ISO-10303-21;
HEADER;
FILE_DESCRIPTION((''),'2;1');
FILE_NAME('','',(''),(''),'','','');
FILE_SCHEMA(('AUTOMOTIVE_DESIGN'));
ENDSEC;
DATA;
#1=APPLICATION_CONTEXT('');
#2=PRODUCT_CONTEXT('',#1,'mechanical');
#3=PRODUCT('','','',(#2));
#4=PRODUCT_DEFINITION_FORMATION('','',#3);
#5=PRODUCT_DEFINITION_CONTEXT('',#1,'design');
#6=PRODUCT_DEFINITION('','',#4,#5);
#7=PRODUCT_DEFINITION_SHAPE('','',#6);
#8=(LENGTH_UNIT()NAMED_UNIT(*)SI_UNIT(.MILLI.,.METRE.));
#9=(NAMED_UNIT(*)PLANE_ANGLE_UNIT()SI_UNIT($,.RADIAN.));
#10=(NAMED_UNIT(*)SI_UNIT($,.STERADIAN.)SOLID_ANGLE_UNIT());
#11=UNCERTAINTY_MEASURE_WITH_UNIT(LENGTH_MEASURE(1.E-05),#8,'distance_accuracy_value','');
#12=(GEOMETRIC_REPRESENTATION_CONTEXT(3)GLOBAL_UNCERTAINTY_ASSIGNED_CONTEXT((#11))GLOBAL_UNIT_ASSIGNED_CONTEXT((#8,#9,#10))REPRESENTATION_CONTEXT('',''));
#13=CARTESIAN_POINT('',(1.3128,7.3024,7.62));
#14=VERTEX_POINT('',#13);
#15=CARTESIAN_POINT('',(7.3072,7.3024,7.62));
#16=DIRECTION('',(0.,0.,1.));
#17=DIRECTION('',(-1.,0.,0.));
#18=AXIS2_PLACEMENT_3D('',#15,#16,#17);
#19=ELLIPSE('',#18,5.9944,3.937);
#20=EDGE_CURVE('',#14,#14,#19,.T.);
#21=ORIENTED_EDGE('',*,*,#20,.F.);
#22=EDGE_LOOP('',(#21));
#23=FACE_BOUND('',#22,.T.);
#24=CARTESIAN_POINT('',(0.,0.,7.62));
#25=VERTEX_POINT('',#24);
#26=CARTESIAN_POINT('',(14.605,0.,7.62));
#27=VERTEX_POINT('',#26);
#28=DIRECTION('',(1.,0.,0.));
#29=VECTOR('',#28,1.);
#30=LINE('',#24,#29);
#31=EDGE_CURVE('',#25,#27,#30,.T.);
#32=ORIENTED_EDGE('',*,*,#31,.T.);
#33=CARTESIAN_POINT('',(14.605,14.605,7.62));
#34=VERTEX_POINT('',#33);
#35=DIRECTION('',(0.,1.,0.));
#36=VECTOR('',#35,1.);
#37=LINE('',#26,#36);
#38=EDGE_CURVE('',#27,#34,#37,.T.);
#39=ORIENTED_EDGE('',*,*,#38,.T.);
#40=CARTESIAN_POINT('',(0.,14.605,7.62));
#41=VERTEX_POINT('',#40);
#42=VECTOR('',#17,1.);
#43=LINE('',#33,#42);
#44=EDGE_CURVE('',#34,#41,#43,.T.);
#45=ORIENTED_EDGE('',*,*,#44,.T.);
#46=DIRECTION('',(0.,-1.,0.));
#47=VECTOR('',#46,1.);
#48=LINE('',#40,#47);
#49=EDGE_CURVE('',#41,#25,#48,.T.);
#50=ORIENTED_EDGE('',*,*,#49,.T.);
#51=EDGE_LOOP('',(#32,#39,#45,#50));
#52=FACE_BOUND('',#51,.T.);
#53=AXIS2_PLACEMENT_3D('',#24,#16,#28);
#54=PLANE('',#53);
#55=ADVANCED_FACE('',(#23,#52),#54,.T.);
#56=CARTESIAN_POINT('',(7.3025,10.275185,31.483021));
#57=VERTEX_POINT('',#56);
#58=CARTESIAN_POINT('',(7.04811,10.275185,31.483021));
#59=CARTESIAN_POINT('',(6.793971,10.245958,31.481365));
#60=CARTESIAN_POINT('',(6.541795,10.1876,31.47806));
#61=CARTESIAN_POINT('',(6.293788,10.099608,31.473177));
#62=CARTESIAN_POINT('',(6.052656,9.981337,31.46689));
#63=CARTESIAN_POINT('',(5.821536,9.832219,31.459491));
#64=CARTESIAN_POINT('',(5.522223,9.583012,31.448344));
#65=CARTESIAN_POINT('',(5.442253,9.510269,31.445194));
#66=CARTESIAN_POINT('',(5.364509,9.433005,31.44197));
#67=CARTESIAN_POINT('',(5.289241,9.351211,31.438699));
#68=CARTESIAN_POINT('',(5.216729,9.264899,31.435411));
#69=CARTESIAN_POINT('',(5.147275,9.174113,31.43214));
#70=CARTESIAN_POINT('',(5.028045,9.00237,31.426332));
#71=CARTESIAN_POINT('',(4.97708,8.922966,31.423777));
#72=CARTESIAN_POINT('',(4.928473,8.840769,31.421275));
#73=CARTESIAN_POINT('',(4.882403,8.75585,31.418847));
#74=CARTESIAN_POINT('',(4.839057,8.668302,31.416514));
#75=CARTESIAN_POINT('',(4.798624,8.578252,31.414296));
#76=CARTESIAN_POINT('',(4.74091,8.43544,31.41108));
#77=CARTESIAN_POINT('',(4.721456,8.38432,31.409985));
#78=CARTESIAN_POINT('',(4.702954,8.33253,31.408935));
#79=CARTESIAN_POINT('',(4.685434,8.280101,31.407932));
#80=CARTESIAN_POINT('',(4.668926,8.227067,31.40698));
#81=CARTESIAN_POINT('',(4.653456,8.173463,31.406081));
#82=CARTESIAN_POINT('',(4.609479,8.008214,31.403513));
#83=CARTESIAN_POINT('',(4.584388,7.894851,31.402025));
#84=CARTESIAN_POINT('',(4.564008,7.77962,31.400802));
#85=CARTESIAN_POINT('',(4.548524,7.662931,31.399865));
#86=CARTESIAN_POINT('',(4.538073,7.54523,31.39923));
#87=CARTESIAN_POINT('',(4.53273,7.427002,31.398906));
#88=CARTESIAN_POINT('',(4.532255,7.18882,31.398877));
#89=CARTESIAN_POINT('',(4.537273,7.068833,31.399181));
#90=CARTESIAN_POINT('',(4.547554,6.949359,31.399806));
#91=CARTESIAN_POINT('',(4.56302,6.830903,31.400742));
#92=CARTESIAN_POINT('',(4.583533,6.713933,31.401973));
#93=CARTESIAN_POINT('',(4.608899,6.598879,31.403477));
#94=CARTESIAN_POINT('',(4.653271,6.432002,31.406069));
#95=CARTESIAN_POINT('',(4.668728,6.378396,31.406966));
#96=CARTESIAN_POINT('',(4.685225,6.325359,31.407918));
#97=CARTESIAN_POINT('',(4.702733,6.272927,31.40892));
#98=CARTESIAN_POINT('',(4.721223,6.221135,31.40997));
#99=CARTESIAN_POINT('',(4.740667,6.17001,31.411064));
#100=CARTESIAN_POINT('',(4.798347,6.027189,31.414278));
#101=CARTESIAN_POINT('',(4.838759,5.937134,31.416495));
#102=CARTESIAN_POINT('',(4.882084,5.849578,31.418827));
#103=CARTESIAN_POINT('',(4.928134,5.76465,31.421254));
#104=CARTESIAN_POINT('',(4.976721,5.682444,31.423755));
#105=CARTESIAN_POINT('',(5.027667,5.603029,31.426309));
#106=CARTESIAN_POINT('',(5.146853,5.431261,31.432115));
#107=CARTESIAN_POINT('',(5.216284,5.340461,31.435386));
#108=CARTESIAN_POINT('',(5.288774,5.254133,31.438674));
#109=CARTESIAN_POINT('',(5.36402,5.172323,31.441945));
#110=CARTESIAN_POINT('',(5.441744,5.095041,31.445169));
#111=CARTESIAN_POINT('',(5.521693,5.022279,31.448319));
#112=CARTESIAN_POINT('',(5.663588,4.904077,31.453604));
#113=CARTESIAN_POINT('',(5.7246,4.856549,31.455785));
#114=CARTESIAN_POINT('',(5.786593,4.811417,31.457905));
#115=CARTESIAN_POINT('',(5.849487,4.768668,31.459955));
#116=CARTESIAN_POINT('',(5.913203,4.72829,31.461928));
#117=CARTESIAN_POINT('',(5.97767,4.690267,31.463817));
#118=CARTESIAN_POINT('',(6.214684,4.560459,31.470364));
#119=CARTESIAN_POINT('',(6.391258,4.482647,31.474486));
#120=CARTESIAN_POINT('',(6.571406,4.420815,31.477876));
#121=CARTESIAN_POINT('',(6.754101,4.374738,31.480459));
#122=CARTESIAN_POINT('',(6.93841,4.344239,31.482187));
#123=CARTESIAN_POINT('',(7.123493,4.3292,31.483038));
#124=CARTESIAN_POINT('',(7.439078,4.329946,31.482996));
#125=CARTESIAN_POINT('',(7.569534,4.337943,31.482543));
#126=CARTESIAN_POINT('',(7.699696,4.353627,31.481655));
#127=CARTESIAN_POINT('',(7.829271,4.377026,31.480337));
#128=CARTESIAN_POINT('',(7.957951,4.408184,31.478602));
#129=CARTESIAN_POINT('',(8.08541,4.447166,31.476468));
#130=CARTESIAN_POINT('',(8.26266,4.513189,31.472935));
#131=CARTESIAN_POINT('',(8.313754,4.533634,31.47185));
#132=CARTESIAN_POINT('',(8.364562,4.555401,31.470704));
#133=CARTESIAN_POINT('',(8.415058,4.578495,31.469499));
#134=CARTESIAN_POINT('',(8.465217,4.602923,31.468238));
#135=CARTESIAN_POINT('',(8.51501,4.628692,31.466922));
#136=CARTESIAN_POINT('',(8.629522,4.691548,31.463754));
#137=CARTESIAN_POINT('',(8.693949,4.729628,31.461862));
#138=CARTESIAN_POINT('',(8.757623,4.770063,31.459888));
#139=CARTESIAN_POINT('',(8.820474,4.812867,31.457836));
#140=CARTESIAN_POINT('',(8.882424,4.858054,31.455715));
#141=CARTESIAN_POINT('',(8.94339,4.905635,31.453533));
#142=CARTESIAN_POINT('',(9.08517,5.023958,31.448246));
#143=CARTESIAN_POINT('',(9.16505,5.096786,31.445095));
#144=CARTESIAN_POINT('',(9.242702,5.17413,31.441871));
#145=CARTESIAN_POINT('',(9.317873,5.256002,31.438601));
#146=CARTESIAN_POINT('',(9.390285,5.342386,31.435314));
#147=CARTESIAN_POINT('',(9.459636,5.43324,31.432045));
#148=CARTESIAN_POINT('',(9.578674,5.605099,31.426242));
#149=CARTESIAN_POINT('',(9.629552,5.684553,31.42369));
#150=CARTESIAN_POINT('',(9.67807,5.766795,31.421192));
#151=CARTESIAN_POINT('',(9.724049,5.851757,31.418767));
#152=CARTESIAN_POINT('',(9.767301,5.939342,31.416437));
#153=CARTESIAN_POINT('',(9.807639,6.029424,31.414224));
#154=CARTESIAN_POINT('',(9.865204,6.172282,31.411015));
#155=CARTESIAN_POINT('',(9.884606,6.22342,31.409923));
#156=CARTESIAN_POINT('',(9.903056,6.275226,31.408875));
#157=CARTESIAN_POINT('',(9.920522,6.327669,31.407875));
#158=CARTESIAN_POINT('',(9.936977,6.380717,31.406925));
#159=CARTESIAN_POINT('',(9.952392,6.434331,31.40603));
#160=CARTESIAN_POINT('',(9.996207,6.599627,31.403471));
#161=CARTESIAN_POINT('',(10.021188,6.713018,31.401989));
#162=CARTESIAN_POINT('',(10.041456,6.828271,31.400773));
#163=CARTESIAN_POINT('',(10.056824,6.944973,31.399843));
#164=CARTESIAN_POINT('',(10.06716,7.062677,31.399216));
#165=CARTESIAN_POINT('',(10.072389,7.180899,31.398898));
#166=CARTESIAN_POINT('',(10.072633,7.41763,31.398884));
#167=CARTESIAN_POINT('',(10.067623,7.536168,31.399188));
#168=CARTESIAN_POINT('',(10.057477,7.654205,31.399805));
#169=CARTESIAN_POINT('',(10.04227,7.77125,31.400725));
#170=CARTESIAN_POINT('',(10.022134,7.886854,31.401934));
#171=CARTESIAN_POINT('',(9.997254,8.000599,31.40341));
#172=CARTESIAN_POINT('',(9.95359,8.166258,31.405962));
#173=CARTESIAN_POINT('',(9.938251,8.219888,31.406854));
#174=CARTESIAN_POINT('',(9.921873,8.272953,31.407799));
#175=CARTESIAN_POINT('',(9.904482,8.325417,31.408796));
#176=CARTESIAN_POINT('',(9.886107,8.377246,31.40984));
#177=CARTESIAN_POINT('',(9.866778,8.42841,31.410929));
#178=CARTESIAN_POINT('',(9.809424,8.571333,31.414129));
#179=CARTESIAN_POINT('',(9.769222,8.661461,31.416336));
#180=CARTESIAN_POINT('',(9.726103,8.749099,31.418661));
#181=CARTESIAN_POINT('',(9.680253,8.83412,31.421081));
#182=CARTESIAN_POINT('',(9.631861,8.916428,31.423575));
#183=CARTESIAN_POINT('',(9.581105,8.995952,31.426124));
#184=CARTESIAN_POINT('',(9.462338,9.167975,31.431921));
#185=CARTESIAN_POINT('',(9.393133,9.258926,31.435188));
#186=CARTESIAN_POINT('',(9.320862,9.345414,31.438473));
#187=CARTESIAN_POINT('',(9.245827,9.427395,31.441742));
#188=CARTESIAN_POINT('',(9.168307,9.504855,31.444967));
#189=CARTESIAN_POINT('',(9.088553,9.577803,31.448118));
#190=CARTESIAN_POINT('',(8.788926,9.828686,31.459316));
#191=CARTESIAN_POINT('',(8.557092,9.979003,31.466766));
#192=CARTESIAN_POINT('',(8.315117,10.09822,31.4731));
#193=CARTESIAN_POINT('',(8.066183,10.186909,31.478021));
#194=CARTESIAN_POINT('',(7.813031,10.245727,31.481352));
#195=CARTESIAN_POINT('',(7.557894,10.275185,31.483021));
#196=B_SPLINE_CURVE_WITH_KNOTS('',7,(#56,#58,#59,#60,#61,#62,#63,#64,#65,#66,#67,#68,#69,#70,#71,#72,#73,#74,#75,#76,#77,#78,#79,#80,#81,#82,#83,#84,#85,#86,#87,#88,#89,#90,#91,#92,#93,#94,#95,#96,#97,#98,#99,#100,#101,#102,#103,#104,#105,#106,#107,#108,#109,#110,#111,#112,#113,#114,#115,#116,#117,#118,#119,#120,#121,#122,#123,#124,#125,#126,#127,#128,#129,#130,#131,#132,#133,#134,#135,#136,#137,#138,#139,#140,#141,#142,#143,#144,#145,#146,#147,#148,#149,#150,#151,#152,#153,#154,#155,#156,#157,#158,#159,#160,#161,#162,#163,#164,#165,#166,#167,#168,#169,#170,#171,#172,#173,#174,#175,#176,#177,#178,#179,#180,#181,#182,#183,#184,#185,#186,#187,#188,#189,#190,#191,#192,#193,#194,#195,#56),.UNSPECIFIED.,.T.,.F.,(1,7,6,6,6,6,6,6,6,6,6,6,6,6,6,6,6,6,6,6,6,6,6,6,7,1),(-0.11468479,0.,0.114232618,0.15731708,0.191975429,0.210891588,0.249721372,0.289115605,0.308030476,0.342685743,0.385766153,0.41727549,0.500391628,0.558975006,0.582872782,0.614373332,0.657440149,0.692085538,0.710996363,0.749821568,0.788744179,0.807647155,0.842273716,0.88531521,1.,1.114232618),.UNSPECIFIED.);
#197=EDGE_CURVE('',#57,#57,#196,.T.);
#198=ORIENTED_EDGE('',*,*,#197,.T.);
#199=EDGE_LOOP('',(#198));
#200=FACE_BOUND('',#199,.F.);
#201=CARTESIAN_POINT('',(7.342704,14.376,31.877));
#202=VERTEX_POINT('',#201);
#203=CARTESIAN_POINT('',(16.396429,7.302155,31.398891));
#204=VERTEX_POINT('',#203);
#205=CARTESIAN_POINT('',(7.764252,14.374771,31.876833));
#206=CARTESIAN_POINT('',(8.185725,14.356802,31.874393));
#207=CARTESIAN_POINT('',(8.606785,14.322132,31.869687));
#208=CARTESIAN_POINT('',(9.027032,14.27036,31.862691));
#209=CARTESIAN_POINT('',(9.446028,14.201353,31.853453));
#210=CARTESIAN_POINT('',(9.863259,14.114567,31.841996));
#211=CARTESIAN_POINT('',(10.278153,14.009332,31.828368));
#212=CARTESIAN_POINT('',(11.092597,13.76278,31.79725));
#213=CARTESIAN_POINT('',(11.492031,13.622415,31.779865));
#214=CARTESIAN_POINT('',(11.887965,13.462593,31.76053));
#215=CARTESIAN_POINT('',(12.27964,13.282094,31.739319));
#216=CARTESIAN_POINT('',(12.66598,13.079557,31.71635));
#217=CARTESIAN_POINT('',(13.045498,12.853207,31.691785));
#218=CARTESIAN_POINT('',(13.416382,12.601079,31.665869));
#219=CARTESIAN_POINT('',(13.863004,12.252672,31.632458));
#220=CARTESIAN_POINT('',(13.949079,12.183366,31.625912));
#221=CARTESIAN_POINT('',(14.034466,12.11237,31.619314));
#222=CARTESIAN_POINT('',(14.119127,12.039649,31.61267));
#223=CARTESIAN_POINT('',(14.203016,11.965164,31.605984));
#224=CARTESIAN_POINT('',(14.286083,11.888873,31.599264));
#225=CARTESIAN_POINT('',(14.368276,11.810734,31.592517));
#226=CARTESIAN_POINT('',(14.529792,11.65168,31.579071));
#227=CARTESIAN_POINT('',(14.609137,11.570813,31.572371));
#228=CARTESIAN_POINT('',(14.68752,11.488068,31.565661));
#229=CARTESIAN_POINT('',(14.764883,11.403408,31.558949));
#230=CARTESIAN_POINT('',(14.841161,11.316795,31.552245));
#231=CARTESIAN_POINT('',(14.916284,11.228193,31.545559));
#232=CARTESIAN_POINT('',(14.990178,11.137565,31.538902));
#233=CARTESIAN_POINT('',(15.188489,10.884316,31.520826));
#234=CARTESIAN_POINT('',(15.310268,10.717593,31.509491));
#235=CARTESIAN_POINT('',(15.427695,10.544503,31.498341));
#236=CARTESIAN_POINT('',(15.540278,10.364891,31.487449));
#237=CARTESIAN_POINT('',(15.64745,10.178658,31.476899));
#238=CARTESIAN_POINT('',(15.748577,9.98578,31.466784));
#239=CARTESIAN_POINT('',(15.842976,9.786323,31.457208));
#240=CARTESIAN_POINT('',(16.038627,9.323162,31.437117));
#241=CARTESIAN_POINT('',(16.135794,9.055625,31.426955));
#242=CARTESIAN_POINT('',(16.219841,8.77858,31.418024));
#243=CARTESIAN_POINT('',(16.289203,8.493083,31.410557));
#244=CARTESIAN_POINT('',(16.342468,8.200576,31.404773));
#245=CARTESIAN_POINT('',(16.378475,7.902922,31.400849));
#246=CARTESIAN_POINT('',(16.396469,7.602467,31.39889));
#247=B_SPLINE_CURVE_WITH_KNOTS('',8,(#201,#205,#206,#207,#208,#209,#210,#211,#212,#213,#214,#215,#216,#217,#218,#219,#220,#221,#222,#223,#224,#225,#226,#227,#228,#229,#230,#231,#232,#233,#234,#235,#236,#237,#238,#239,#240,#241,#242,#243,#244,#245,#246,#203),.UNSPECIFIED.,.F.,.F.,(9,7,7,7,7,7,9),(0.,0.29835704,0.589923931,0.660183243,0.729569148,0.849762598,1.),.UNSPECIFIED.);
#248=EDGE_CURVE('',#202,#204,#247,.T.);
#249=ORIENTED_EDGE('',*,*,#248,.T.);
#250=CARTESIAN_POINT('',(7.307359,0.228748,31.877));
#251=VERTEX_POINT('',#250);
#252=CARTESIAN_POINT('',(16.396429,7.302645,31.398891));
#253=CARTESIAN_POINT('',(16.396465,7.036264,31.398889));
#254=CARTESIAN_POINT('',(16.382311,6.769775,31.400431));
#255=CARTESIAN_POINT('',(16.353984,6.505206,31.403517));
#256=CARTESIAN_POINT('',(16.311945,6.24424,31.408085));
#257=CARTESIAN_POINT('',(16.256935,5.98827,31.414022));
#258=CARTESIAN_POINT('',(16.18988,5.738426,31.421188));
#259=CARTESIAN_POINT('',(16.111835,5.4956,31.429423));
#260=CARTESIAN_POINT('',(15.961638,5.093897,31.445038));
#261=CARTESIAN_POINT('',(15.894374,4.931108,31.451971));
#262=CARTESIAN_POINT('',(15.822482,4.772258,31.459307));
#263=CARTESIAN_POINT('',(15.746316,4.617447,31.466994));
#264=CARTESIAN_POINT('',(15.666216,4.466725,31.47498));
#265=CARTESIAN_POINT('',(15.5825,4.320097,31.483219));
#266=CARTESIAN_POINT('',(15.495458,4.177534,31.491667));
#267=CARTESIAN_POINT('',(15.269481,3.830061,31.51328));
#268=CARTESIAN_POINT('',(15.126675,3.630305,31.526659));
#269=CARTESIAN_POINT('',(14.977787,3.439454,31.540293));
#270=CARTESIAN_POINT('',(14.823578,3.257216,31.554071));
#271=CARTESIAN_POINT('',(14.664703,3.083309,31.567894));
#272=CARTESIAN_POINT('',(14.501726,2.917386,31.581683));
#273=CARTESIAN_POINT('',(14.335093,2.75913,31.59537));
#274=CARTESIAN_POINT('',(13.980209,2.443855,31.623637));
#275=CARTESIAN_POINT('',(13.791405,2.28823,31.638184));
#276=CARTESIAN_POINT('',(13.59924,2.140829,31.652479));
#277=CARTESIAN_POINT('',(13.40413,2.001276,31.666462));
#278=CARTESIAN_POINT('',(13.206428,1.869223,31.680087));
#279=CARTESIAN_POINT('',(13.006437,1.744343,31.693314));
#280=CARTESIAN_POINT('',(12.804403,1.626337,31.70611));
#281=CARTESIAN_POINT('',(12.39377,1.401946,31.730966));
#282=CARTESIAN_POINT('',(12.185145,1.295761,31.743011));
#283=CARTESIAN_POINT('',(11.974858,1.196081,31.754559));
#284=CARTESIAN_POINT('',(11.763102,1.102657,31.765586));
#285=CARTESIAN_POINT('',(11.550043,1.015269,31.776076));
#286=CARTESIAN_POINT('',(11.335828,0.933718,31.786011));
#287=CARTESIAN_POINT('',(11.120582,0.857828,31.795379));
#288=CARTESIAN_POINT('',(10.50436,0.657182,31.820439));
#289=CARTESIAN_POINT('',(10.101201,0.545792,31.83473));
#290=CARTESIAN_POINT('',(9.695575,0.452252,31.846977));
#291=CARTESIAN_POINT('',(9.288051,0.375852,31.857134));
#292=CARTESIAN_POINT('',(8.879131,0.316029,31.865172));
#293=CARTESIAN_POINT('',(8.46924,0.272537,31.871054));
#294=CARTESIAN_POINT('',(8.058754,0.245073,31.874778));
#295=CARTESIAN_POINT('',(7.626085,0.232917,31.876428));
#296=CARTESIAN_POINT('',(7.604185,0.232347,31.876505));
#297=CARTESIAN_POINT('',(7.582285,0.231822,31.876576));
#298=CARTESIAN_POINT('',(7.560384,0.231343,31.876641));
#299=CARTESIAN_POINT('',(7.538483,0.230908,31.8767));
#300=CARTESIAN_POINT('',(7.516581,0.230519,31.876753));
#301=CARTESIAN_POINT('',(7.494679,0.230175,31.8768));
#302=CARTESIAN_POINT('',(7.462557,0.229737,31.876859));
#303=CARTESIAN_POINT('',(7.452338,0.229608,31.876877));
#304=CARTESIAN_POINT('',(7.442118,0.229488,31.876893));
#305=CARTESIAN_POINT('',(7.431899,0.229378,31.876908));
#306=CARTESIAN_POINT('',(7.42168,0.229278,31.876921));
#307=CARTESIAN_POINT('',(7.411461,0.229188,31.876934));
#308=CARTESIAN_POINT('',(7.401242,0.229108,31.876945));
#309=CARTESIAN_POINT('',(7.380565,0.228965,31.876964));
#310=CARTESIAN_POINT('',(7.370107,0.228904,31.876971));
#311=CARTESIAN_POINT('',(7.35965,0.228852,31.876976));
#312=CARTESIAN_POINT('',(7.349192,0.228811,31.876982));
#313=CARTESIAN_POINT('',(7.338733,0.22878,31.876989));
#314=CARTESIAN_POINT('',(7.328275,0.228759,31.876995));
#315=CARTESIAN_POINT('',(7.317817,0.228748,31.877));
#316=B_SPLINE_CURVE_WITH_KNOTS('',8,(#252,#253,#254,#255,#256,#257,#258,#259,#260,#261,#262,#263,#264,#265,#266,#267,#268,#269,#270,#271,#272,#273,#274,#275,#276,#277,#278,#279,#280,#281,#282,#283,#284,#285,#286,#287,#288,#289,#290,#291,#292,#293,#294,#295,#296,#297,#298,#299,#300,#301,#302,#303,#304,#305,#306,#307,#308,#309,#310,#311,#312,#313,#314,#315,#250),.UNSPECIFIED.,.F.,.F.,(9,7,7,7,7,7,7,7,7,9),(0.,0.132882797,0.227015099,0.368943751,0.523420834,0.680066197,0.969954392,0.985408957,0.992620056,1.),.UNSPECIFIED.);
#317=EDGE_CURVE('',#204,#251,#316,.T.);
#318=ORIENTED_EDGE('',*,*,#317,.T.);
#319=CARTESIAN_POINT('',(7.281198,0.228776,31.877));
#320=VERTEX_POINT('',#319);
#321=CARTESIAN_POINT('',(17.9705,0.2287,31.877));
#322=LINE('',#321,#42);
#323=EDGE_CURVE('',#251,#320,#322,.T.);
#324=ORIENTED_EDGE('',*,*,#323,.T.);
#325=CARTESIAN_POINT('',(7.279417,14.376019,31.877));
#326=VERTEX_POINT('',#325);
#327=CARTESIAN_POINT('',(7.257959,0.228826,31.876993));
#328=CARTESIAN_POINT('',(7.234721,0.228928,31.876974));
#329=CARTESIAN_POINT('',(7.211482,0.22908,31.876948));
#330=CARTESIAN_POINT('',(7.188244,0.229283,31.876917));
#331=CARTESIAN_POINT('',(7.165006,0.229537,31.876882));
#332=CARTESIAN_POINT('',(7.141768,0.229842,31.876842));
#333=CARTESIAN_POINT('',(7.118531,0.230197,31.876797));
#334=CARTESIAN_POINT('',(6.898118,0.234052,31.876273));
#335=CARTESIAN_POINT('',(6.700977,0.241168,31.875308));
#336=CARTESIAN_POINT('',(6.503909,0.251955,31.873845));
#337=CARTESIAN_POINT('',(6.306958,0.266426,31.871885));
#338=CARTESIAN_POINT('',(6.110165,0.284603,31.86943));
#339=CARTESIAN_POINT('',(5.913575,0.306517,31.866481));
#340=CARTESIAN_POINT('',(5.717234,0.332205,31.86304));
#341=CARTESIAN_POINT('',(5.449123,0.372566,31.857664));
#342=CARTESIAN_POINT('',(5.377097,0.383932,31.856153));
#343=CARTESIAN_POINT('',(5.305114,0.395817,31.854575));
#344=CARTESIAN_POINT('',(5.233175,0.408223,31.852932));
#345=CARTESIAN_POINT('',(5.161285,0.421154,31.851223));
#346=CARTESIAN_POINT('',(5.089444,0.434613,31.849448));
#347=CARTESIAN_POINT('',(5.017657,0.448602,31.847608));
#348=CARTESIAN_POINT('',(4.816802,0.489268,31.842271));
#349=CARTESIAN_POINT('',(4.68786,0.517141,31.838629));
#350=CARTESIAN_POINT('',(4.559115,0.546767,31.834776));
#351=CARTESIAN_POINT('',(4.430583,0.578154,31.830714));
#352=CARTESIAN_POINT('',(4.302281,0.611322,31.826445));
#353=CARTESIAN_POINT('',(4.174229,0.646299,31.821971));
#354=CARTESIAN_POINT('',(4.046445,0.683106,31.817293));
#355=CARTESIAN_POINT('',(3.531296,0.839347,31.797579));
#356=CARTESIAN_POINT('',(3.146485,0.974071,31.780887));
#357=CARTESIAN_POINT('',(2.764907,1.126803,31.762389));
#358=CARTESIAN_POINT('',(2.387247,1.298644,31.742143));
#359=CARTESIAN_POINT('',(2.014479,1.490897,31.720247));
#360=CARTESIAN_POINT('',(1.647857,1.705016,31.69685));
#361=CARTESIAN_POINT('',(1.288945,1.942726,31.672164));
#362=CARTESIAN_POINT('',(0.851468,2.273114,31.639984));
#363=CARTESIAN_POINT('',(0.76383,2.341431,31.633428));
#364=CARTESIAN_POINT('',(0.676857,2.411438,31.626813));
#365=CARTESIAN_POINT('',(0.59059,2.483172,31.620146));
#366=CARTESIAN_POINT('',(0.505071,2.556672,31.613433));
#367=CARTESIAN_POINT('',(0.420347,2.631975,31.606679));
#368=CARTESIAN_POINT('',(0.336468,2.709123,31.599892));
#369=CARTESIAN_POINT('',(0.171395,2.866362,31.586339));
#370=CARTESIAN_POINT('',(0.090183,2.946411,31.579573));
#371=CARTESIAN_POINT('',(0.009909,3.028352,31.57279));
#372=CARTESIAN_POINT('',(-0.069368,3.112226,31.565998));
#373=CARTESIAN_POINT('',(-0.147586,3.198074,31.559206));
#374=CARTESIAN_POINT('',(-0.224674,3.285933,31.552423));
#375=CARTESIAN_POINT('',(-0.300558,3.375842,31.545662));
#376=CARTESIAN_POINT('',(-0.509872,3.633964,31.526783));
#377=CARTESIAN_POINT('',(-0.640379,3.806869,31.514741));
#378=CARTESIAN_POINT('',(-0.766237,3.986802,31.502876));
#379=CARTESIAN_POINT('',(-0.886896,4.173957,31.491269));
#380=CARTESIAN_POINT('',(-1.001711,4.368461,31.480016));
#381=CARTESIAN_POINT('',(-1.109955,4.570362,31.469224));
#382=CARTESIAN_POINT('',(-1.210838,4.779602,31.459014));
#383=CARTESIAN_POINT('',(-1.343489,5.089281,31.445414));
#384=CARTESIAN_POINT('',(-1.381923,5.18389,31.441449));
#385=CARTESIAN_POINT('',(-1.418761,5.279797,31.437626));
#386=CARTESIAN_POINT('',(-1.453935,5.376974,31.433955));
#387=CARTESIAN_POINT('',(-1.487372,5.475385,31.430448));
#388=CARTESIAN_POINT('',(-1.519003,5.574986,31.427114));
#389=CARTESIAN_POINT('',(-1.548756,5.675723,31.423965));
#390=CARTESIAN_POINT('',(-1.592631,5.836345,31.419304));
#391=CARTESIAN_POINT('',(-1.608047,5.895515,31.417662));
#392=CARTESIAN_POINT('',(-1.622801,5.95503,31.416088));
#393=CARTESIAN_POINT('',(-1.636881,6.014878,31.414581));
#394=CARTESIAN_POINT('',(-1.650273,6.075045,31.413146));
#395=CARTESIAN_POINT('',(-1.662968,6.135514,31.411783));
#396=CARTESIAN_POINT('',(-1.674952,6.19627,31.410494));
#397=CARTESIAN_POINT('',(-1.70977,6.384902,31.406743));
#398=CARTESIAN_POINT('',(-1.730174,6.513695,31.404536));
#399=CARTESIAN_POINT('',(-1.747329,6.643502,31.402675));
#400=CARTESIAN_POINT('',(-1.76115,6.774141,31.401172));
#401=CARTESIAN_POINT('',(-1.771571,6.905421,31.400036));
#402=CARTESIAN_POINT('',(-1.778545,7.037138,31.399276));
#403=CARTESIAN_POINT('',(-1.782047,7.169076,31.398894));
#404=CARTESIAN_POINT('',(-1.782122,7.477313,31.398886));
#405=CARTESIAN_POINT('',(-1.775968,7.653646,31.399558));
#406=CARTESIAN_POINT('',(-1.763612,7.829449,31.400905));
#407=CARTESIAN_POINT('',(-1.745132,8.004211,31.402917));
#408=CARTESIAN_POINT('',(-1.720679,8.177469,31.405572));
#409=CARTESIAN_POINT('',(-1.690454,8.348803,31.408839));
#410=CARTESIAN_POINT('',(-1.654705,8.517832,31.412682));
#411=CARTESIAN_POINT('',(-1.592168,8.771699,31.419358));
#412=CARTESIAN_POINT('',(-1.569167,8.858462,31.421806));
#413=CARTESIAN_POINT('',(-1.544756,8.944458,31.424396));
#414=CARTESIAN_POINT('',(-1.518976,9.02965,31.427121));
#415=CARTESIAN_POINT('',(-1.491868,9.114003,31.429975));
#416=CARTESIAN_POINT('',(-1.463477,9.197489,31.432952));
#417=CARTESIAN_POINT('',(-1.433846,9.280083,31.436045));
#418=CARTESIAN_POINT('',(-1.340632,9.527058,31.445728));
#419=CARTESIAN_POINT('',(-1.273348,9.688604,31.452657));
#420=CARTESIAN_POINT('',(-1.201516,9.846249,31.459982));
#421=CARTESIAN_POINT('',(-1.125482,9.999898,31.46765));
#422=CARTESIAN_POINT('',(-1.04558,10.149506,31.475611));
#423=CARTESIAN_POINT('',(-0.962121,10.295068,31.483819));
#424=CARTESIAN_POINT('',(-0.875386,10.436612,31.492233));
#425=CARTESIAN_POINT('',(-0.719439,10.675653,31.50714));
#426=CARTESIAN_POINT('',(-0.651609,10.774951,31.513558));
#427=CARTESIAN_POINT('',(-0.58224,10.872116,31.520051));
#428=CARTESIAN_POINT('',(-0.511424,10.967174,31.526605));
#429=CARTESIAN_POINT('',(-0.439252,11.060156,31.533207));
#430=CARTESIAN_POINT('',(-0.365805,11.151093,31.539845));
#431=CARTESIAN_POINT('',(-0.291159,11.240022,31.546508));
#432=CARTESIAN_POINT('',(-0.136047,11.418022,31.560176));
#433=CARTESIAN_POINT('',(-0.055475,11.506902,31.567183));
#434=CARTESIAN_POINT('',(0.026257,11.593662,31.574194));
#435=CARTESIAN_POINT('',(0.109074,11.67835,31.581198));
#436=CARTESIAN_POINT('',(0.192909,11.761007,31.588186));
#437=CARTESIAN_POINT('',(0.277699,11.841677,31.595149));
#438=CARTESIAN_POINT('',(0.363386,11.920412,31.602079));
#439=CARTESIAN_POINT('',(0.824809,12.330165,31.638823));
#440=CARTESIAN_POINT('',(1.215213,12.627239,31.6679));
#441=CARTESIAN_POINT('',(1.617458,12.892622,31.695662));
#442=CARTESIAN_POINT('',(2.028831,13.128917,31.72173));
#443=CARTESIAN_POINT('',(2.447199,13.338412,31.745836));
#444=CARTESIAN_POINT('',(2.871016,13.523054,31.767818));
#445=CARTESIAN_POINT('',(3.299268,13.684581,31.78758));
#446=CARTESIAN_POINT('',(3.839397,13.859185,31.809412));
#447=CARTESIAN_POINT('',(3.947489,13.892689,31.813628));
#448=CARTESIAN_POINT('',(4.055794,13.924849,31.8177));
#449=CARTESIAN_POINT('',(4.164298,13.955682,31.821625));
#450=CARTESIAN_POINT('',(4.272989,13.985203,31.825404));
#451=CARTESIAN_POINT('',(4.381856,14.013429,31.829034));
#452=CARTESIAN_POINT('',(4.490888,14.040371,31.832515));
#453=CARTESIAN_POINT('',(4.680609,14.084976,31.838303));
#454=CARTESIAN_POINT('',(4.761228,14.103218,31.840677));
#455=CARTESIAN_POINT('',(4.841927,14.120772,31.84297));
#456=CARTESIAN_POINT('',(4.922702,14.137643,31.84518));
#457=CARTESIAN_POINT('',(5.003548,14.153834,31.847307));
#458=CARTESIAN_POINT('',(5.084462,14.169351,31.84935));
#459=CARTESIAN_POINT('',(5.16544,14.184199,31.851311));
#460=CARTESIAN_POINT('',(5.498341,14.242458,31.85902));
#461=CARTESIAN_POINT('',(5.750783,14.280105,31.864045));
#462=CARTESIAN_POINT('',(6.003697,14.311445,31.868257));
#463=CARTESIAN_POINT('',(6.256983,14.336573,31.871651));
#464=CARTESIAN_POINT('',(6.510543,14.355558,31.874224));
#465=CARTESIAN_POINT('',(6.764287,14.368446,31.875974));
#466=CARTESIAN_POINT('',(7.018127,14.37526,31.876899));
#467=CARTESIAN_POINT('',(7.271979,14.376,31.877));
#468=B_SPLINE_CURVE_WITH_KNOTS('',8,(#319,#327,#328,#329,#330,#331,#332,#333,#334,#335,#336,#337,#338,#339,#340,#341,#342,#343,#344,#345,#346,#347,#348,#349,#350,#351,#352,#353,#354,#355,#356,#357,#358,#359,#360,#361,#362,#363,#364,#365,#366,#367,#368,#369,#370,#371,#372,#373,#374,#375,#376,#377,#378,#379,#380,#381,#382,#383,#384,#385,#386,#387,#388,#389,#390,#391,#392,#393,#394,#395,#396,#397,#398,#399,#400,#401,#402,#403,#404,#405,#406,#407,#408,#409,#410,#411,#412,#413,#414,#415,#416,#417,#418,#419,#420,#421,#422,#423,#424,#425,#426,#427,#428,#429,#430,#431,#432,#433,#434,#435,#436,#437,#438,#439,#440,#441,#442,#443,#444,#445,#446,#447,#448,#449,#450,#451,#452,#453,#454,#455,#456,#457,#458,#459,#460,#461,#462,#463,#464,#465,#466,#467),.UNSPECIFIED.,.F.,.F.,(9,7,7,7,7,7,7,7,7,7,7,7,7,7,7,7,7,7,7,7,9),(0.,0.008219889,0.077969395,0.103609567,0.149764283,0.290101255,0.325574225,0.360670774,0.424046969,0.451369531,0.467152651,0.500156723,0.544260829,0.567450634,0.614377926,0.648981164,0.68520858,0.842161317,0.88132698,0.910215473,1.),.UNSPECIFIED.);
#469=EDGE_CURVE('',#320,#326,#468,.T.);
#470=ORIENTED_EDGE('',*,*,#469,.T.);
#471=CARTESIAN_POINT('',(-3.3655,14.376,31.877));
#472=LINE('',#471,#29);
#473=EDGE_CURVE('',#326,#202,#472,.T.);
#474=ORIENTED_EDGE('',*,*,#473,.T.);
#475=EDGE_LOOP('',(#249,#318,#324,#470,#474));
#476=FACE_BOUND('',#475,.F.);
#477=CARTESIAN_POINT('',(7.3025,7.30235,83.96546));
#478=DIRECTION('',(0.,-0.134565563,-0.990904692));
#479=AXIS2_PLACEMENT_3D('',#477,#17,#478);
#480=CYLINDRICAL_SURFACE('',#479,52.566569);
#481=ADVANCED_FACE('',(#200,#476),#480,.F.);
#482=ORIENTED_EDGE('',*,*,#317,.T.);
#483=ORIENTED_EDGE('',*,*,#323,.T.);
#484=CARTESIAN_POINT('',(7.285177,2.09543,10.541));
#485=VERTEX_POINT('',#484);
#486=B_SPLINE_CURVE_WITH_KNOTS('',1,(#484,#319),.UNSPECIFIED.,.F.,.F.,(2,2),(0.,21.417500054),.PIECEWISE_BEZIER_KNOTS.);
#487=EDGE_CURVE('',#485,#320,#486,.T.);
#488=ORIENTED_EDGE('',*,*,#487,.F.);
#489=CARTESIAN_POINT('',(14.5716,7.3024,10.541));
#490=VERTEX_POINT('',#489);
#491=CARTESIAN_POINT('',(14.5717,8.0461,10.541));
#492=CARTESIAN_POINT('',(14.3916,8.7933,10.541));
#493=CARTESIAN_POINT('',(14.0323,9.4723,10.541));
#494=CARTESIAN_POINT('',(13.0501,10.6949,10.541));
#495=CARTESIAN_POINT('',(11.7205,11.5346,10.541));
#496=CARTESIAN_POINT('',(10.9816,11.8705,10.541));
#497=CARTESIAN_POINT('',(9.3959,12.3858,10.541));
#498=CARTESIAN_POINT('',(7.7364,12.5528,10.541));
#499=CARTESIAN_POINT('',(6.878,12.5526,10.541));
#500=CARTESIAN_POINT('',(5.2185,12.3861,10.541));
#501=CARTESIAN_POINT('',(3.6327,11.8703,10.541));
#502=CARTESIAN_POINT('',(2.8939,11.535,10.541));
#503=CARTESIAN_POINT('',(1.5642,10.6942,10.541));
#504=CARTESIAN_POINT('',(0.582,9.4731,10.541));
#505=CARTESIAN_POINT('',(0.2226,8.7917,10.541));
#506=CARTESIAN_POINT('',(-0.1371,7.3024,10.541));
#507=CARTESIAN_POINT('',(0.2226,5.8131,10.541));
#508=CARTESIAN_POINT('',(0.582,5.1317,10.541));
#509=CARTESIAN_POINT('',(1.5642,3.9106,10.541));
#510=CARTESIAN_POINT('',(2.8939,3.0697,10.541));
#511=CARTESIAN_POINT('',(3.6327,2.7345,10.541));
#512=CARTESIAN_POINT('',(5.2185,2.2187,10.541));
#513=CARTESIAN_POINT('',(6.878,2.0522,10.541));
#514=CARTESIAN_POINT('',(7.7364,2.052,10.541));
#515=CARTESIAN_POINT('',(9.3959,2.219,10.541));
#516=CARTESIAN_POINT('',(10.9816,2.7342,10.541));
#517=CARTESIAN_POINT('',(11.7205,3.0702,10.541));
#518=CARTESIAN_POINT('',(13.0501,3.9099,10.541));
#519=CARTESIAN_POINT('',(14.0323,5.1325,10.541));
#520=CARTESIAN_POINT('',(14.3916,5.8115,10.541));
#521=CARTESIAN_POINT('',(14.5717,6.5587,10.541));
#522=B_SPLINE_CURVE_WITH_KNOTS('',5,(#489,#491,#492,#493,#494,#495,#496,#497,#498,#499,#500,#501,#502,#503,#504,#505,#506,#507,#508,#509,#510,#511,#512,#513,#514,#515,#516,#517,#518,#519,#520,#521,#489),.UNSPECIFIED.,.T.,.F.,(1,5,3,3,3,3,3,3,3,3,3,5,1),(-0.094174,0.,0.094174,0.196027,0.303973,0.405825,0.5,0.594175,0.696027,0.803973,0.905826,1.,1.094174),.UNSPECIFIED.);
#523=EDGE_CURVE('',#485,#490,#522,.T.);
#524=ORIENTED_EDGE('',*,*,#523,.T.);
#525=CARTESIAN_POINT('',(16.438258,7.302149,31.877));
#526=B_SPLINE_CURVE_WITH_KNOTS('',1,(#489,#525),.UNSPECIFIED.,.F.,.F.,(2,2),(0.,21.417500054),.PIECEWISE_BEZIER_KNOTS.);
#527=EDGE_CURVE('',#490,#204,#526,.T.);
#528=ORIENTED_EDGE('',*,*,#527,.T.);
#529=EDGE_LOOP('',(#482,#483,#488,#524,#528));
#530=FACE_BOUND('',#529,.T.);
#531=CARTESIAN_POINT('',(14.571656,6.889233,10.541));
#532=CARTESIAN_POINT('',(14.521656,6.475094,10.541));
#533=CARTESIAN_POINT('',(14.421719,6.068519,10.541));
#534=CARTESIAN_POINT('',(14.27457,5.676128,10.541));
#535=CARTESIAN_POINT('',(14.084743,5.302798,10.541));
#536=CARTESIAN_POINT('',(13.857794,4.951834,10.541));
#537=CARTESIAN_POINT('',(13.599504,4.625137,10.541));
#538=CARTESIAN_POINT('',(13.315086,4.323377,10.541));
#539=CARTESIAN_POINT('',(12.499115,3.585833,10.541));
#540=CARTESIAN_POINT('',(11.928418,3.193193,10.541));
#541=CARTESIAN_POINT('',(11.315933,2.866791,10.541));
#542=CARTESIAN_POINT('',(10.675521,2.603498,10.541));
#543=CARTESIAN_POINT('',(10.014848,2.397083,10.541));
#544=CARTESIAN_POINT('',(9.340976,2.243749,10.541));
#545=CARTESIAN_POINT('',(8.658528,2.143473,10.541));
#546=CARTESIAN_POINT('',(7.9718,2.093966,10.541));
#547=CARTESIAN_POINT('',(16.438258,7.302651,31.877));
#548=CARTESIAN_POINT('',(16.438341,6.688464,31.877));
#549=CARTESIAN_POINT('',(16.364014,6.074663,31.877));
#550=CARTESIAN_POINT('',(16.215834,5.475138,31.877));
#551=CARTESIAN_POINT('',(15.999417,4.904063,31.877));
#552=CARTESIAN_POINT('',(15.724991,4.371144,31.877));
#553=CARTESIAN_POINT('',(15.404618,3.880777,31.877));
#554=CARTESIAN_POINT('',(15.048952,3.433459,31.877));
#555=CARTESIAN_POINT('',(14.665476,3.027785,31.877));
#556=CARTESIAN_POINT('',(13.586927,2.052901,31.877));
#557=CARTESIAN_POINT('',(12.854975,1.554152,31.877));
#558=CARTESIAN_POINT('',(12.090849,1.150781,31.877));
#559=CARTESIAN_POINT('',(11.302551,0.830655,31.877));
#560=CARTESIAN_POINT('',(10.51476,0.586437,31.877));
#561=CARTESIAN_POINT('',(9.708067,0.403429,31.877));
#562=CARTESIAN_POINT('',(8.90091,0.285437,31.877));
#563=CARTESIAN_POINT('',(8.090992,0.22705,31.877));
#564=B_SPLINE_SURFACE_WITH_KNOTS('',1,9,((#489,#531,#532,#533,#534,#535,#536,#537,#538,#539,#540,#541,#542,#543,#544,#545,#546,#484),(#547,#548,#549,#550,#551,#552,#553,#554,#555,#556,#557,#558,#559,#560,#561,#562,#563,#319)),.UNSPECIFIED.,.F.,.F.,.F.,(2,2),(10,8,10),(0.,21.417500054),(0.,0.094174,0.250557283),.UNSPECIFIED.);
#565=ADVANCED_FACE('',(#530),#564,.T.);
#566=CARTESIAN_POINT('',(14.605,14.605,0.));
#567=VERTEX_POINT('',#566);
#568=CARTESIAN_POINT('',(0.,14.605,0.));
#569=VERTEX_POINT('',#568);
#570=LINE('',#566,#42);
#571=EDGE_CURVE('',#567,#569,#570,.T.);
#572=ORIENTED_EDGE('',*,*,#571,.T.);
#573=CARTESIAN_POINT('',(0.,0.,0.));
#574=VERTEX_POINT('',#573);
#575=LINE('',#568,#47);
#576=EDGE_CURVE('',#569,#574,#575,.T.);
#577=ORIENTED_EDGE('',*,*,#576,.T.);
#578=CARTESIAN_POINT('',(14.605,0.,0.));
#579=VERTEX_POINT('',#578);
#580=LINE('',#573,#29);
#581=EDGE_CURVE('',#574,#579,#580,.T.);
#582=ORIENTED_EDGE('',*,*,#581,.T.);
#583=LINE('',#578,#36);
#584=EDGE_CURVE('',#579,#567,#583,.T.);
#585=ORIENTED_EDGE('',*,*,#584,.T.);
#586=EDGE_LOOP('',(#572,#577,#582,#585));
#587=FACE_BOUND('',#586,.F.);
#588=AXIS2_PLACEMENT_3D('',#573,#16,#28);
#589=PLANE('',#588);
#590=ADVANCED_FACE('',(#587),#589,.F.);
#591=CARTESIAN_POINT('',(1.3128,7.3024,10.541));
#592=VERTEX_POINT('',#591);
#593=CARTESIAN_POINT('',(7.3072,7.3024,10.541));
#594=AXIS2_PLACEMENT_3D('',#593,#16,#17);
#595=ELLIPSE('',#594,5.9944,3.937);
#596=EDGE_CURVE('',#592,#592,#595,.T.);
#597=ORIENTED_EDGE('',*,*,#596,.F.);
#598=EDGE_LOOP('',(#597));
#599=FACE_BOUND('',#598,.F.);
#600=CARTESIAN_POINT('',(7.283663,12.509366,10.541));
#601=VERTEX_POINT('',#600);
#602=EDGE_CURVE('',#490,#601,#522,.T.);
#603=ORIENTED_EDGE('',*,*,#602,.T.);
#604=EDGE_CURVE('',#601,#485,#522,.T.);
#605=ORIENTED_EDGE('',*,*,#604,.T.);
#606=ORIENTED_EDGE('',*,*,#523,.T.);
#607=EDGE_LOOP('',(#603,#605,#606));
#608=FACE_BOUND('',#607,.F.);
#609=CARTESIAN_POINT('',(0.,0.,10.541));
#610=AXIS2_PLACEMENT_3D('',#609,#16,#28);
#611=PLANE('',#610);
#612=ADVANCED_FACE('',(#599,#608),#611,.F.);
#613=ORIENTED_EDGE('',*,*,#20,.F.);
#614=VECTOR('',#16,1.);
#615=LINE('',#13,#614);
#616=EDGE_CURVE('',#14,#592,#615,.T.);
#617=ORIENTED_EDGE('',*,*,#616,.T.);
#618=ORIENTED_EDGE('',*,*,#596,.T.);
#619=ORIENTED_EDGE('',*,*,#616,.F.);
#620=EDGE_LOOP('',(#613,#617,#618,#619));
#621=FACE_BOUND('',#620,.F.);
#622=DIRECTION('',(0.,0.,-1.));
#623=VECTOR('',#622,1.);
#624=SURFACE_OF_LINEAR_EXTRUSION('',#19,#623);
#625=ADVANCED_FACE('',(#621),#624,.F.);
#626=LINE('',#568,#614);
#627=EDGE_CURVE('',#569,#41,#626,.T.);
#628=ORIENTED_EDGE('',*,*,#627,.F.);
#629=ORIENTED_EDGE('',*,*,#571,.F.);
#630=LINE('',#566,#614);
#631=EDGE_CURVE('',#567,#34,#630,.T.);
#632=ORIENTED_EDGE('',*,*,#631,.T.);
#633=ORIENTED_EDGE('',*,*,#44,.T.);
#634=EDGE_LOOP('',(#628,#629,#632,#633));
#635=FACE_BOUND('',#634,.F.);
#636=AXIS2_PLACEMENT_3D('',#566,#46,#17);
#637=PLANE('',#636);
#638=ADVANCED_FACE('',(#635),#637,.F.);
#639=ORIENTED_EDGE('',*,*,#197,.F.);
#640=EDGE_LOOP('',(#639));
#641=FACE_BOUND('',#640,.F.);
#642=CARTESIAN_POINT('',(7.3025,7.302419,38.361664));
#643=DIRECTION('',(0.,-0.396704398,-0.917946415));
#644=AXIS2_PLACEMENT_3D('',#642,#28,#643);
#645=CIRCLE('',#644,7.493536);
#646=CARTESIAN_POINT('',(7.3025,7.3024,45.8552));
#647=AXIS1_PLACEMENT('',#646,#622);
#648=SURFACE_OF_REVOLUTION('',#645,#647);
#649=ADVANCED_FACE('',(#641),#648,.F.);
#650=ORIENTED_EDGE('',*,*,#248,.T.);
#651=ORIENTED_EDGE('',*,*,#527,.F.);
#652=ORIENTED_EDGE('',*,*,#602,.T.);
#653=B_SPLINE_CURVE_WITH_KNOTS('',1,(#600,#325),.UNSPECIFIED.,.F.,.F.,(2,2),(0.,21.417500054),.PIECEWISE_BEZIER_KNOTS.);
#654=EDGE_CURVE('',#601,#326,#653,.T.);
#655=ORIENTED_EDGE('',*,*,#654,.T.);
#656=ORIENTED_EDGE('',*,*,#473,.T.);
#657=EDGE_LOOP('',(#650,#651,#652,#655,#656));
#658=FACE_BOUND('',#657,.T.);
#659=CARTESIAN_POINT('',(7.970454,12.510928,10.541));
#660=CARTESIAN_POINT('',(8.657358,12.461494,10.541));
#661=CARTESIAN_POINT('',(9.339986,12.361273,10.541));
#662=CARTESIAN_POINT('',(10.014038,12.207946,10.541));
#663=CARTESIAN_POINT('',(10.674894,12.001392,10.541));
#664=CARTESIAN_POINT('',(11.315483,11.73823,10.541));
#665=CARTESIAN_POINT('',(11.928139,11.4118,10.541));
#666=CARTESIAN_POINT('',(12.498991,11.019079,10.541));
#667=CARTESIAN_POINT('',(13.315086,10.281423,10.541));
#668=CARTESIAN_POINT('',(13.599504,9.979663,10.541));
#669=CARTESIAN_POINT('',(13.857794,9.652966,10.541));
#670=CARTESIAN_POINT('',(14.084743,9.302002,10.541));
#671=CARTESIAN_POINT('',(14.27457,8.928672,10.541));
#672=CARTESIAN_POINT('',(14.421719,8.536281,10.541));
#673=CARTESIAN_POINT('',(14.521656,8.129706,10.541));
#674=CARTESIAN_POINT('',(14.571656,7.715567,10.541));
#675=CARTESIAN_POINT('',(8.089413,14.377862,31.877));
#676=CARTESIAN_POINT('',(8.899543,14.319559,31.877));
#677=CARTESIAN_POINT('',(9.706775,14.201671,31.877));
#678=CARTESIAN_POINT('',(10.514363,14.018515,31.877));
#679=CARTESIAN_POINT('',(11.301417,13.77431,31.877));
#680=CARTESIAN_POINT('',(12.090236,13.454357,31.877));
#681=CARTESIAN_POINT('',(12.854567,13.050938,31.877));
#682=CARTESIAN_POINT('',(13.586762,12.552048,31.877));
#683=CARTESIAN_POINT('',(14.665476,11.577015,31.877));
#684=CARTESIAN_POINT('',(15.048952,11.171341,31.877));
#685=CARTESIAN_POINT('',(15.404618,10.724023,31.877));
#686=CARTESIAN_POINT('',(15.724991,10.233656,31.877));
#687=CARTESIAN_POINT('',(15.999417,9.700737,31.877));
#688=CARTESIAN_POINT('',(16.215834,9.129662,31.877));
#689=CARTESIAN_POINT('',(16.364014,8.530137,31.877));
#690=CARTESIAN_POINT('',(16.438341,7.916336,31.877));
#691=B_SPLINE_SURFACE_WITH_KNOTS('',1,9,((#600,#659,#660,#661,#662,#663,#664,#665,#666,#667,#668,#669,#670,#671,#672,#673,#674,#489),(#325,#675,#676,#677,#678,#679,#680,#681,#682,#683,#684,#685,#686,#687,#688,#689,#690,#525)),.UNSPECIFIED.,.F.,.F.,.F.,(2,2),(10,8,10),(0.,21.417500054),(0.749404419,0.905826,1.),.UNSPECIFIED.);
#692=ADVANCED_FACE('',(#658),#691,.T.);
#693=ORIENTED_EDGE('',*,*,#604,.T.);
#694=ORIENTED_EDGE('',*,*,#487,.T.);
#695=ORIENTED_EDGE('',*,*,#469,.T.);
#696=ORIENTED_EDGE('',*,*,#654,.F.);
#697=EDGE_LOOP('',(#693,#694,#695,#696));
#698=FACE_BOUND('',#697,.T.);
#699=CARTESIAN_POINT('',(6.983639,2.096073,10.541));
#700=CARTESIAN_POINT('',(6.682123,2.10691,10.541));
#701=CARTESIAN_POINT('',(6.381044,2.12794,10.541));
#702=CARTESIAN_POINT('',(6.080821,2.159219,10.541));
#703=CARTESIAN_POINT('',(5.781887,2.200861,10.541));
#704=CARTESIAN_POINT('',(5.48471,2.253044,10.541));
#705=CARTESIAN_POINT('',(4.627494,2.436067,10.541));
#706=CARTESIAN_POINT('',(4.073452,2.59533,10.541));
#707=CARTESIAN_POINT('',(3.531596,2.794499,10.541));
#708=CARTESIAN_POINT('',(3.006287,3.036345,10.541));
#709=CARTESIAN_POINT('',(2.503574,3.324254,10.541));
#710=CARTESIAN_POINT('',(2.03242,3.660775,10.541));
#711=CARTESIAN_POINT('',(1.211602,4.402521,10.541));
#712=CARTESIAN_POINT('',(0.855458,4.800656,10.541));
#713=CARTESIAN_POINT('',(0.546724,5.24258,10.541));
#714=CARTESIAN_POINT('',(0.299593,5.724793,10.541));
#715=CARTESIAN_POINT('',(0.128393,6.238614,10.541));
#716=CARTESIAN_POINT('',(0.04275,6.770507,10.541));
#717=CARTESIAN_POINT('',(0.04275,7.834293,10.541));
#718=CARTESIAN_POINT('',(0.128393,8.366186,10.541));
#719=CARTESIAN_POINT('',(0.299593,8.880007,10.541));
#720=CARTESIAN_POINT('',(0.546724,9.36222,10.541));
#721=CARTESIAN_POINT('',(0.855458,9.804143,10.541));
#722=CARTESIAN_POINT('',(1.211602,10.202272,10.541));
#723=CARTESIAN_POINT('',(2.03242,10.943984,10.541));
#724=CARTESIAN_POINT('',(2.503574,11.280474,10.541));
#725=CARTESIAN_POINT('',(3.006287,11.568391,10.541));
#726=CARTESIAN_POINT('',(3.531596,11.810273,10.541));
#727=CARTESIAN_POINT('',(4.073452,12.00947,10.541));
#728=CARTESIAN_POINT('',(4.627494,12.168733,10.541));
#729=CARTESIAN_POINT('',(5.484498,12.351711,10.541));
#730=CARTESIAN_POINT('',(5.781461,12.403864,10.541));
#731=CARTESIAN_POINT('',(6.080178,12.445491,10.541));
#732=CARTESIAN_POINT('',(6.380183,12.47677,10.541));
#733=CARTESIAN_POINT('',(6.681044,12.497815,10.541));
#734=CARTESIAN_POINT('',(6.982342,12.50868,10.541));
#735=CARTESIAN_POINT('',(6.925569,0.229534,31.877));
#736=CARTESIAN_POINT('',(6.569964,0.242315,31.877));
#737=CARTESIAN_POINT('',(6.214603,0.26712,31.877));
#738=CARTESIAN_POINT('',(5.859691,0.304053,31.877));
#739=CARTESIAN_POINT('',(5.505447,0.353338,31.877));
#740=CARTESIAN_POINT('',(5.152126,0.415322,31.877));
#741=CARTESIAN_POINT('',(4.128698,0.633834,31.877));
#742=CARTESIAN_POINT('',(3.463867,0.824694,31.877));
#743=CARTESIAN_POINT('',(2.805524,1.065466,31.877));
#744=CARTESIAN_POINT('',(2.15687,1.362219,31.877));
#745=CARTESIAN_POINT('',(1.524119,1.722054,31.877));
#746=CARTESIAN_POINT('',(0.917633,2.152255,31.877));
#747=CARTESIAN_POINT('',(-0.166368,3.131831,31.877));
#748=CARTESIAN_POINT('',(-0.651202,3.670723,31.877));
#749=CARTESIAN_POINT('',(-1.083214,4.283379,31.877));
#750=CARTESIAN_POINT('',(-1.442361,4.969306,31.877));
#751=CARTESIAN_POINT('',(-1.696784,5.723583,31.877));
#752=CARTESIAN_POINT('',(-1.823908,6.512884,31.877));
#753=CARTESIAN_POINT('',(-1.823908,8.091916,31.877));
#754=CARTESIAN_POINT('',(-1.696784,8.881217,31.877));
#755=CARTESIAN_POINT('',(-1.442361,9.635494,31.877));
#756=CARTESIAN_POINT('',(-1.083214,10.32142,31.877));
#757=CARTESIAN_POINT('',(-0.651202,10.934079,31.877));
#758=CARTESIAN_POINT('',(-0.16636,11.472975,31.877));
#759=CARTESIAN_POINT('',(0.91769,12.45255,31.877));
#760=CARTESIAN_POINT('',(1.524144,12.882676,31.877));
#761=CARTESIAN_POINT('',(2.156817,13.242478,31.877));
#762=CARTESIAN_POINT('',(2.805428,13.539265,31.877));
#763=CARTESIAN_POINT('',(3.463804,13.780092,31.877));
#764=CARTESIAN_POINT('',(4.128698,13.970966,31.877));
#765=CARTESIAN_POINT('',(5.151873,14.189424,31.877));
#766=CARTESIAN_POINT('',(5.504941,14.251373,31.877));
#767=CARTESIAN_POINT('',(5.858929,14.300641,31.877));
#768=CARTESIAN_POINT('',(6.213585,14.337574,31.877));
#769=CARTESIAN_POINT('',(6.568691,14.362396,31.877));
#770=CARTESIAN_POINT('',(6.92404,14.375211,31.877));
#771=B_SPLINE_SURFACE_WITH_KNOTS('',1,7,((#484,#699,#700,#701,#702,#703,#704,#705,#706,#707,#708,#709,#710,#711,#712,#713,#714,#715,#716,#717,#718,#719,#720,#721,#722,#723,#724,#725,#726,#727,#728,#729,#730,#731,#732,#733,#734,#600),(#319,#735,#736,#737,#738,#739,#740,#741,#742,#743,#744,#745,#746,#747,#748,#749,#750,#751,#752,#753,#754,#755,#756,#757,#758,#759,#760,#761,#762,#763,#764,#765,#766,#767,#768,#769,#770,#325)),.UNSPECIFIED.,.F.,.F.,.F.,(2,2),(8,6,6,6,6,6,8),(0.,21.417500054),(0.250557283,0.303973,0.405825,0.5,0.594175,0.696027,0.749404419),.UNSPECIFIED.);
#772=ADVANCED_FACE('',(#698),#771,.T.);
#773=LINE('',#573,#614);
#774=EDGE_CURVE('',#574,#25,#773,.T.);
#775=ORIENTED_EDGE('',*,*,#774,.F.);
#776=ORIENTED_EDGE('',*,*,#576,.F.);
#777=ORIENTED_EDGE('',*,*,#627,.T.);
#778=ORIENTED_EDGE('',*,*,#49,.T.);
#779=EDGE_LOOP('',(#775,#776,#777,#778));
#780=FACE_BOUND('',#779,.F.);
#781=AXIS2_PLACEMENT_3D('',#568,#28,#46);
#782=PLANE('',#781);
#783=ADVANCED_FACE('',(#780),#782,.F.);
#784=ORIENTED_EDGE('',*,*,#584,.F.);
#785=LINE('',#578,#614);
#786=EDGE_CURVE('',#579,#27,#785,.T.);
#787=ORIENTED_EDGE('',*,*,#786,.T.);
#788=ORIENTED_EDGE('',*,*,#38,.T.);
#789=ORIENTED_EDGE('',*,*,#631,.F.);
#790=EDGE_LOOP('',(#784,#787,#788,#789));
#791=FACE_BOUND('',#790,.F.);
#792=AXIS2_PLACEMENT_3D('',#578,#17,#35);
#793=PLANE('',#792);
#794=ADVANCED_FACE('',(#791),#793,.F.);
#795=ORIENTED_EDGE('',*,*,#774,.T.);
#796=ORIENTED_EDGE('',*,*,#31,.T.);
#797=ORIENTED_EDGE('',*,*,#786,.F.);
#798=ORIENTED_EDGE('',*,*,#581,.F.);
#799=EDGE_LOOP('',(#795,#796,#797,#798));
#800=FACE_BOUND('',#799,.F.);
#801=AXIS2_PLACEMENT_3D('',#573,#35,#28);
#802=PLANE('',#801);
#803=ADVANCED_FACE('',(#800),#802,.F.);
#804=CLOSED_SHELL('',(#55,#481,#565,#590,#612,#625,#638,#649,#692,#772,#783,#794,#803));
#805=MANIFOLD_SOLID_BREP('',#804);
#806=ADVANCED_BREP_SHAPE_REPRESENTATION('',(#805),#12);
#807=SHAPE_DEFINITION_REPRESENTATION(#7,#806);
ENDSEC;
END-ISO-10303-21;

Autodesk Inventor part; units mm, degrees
ref_plane "YZ Plane" through (0, 0, 0) normal (1, 0, 0) x (0, 1, 0)
ref_plane "XY Plane" through (0, 0, 0) normal (0, 0, 1) x (1, 0, 0)
sketch "Sketch1" plane through (0, 0, 0) normal (0, 0, 1) x (1, 0, 0)
  line L0 (0, 0) -> (14.605, 0)
  line L1 (14.605, 0) -> (14.605, 14.605)
  line L2 (14.605, 14.605) -> (0, 14.605)
  line L3 (0, 14.605) -> (0, 0)
  dimension "d0" = 14.605
  dimension "d1" = 14.605
extrude "Extrusion1" add sketch "Sketch1" along normal blind 7.62
sketch "Sketch2" plane through (0, 0, 7.62) normal (0, 0, 1) x (1, 0, 0)
  line L0 (0, 14.605) -> (0, 0) construction
  ellipse E0 centre (7.3072, 7.3024) end of major axis (1.3128, 7.3024) minor radius 3.937
  line L1 (0, 7.3025) -> (14.605, 7.3025) construction
  line L2 (14.605, 0) -> (14.605, 14.605) construction
  line L3 (14.605, 14.605) -> (0, 14.605) construction
  line L4 (7.3025, 14.605) -> (7.3025, 0) construction
  dimension "d4" = 5.9944
  dimension "d5" = 3.937
extrude "Extrusion2" add sketch "Sketch2" along normal blind 2.921
sketch "Sketch3" plane through (0, 0, 10.541) normal (0, 0, 1) x (1, 0, 0)
  ellipse E0 centre (7.3072, 7.3024) end of major axis (13.3016, 7.3024) minor radius 3.937 projected
  spline S0 degree 5 poles (14.5716, 7.3024) (14.5717, 8.0461) (14.3916, 8.7933) (14.0323, 9.4723) (13.0501, 10.6949) (11.7205, 11.5346) (10.9816, 11.8705) (9.3959, 12.3858) (7.7364, 12.5528) (6.878, 12.5526) (5.2185, 12.3861) (3.6327, 11.8703) (2.8939, 11.535) (1.5642, 10.6942) (0.582, 9.4731) (0.2226, 8.7917) (-0.1371, 7.3024) (0.2226, 5.8131) (0.582, 5.1317) (1.5642, 3.9106) (2.8939, 3.0697) (3.6327, 2.7345) (5.2185, 2.2187) (6.878, 2.0522) (7.7364, 2.052) (9.3959, 2.219) (10.9816, 2.7342) (11.7205, 3.0702) (13.0501, 3.9099) (14.0323, 5.1325) (14.3916, 5.8115) (14.5717, 6.5587) (14.5716, 7.3024) knots 0 0 0 0 0 0 0.094174 0.094174 0.094174 0.196027 0.196027 0.196027 0.303973 0.303973 0.303973 0.405825 0.405825 0.405825 0.5 0.5 0.5 0.594175 0.594175 0.594175 0.696027 0.696027 0.696027 0.803973 0.803973 0.803973 0.905826 0.905826 0.905826 1 1 1 1 1 1
  point P0 (0, 0)
  dimension "d8" = 1.27
extrude "Extrusion3" add sketch "Sketch3" along normal blind 21.336 draft 5 contours E0 | S0
ref_plane "Work Plane1" through (7.3025, 0, 0) normal (1, 0, 0) x (0, 0, -1)
sketch "Sketch4" plane through (7.3025, 0, 0) normal (1, 0, 0) x (0, 0, -1)
  line L0 (-31.877, 14.376) -> (-31.877, 0.2287) projected
  line L1 (-10.541, 7.3024) -> (-31.877, 7.3024) projected
  line L2 (-10.541, 12.5094) -> (-10.541, 2.0954) projected
  line L3 (-31.877, 14.376) -> (-31.877, 0.2287) projected
  line L4 (-10.541, 7.3024) -> (-31.877, 7.3024) projected
  line L5 (-10.541, 12.5094) -> (-10.541, 2.0954) projected
  arc A0 (-31.877, 0.2287) -> (-31.877, 14.376) centre (-83.9662, 7.3024) ccw
  point P0 (0, 0)
extrude "Extrusion4" cut sketch "Sketch4" along normal mid plane 21.336
sketch "Sketch6" plane through (7.3025, 0, 0) normal (1, 0, 0) x (0, 0, -1)
  line L0 (-10.541, 7.3024) -> (-31.3989, 7.3024) projected
  line L1 (-10.541, 12.5094) -> (-10.541, 2.0954) projected
  arc A0 (-31.483, 4.3297) -> (-45.8552, 7.3024) centre (-38.3617, 7.3024) ccw
  line L2 (-45.8552, 7.3024) -> (-30.8682, 7.3024)
  point P0 (0, 0)
revolve "Revolution2" add sketch "Sketch6" angle 360 about axis through (7.3025, 7.3024, 45.8552) along (0, 0, -1)
ref_plane "Work Plane2" through (7.3025, -0.1911, 38.3617) normal (0, 1, 0) x (-1, 0, 0)
sketch "Sketch7" plane through (7.3025, -0.1911, 38.3617) normal (0, 1, 0) x (-1, 0, 0)
  line L0 (8.9497, 10.6012) -> (-8.3434, 10.6012) construction
  line L1 (-8.3434, 10.6012) -> (-8.3434, -11.4845) construction
  line L2 (-8.3434, -11.4845) -> (8.9497, -11.4845) construction
  line L3 (8.9497, -11.4845) -> (8.9497, 10.6012) construction
  line L4 (0.3032, -9.6649) -> (0.3032, 13.5821)
  point P0 (7.3025, -38.3617)
properties part number "Head Em 3"
